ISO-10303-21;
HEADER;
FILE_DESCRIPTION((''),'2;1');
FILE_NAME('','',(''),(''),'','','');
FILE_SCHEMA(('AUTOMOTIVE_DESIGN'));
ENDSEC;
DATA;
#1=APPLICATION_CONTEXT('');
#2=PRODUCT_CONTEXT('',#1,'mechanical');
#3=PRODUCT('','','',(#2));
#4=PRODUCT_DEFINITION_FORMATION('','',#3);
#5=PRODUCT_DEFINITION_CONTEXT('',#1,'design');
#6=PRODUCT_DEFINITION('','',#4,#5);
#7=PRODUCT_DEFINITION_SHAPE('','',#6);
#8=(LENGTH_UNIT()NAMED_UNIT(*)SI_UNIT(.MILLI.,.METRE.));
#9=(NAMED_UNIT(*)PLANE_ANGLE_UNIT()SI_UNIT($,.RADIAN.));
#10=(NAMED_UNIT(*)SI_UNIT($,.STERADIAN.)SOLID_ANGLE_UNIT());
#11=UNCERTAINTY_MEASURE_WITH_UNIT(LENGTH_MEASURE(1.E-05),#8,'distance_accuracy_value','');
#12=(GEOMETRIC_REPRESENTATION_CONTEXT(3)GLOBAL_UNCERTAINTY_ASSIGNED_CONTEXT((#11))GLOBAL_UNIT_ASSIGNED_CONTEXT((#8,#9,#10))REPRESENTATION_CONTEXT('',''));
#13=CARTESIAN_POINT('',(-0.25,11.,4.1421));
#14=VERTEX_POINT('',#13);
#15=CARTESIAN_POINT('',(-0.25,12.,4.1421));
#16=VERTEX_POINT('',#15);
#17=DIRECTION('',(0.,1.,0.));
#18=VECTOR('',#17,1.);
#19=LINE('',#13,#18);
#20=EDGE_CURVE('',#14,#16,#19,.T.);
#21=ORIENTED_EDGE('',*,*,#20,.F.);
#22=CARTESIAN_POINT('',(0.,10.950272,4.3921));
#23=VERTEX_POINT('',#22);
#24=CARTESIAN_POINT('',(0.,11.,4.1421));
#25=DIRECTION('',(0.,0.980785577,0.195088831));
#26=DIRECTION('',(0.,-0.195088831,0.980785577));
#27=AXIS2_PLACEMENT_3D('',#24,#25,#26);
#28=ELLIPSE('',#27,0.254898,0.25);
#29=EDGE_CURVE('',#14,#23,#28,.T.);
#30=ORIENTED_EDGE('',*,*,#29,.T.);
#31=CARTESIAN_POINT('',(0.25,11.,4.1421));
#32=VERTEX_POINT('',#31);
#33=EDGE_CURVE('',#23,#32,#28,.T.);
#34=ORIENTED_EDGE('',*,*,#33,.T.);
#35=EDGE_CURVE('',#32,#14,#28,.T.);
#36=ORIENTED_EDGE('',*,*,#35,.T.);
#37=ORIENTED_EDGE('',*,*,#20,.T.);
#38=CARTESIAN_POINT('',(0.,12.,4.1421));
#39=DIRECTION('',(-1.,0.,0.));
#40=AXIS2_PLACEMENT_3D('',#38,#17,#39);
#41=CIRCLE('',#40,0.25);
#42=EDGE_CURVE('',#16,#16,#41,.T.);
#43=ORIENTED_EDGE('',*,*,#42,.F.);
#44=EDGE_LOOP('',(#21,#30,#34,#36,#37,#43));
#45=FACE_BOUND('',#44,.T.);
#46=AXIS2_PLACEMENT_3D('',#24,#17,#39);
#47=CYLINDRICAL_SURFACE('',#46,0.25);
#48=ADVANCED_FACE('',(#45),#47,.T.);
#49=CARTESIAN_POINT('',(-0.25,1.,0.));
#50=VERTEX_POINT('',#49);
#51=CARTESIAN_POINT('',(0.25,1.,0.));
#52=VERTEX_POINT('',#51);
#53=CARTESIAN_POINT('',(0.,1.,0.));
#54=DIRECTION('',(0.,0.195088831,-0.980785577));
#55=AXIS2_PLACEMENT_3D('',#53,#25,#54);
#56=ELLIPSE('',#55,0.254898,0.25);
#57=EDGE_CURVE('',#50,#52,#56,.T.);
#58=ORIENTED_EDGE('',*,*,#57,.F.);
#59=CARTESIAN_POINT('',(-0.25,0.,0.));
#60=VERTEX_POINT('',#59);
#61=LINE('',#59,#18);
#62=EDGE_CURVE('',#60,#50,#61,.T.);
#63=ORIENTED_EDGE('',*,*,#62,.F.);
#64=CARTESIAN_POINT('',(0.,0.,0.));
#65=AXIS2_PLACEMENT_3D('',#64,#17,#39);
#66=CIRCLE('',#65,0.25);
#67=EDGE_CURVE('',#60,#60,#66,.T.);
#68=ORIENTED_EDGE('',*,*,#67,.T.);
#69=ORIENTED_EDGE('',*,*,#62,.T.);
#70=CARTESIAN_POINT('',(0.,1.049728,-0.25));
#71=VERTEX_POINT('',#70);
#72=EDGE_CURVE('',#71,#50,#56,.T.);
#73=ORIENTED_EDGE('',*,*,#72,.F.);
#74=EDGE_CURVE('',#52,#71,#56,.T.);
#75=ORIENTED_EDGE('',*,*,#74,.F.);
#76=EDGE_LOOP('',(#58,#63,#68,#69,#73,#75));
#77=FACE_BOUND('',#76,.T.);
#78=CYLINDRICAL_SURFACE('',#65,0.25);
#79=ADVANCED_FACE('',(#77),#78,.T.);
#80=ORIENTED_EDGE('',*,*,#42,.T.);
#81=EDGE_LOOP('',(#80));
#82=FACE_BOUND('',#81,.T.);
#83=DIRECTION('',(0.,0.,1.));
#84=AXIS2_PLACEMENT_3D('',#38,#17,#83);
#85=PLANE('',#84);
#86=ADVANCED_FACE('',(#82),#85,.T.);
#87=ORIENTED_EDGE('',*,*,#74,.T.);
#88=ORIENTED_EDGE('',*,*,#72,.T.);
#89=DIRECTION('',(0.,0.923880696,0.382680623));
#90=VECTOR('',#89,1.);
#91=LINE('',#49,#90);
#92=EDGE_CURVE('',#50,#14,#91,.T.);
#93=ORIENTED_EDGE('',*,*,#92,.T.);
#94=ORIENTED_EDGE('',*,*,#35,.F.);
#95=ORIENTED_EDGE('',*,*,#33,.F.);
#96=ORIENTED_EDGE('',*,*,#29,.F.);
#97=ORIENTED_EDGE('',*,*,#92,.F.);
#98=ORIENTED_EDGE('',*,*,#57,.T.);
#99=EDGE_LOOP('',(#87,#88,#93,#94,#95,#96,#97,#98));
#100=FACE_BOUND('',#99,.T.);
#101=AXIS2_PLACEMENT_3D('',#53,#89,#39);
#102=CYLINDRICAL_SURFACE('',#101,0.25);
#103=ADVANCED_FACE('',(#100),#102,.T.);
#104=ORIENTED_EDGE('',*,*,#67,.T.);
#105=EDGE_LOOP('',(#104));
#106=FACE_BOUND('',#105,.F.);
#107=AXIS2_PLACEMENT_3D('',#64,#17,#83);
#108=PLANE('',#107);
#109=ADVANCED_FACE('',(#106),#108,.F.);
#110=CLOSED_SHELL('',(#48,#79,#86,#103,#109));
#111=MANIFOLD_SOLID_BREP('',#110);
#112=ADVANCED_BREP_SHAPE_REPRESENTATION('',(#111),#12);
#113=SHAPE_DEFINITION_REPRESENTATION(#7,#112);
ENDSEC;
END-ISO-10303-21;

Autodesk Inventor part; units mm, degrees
ref_plane "YZ Plane" through (0, 0, 0) normal (1, 0, 0) x (0, 1, 0)
ref_plane "XZ Plane" through (0, 0, 0) normal (0, 1, 0) x (-1, 0, 0)
ref_plane "XY Plane" through (0, 0, 0) normal (0, 0, 1) x (1, 0, 0)
sketch "Sketch1" plane through (0, 0, 0) normal (0, 1, 0) x (-1, 0, 0)
  circle A0 centre (0, 0) radius 0.25
  dimension "d0" = 0.5
sketch "Sketch2" plane through (0, 0, 0) normal (1, 0, 0) x (0, 1, 0)
  line L0 (0, 0) -> (1, 0)
  line L1 (1, 0) -> (11, 4.1421)
  line L2 (11, 4.1421) -> (12, 4.1421)
  dimension "d1" = 1
  dimension "d2" = 157.5
  dimension "d3" = 10
  dimension "d4" = 1
sweep "Sweep1" add profiles "Sketch1" path "Sketch2"
properties part number "cable 22,5°"
